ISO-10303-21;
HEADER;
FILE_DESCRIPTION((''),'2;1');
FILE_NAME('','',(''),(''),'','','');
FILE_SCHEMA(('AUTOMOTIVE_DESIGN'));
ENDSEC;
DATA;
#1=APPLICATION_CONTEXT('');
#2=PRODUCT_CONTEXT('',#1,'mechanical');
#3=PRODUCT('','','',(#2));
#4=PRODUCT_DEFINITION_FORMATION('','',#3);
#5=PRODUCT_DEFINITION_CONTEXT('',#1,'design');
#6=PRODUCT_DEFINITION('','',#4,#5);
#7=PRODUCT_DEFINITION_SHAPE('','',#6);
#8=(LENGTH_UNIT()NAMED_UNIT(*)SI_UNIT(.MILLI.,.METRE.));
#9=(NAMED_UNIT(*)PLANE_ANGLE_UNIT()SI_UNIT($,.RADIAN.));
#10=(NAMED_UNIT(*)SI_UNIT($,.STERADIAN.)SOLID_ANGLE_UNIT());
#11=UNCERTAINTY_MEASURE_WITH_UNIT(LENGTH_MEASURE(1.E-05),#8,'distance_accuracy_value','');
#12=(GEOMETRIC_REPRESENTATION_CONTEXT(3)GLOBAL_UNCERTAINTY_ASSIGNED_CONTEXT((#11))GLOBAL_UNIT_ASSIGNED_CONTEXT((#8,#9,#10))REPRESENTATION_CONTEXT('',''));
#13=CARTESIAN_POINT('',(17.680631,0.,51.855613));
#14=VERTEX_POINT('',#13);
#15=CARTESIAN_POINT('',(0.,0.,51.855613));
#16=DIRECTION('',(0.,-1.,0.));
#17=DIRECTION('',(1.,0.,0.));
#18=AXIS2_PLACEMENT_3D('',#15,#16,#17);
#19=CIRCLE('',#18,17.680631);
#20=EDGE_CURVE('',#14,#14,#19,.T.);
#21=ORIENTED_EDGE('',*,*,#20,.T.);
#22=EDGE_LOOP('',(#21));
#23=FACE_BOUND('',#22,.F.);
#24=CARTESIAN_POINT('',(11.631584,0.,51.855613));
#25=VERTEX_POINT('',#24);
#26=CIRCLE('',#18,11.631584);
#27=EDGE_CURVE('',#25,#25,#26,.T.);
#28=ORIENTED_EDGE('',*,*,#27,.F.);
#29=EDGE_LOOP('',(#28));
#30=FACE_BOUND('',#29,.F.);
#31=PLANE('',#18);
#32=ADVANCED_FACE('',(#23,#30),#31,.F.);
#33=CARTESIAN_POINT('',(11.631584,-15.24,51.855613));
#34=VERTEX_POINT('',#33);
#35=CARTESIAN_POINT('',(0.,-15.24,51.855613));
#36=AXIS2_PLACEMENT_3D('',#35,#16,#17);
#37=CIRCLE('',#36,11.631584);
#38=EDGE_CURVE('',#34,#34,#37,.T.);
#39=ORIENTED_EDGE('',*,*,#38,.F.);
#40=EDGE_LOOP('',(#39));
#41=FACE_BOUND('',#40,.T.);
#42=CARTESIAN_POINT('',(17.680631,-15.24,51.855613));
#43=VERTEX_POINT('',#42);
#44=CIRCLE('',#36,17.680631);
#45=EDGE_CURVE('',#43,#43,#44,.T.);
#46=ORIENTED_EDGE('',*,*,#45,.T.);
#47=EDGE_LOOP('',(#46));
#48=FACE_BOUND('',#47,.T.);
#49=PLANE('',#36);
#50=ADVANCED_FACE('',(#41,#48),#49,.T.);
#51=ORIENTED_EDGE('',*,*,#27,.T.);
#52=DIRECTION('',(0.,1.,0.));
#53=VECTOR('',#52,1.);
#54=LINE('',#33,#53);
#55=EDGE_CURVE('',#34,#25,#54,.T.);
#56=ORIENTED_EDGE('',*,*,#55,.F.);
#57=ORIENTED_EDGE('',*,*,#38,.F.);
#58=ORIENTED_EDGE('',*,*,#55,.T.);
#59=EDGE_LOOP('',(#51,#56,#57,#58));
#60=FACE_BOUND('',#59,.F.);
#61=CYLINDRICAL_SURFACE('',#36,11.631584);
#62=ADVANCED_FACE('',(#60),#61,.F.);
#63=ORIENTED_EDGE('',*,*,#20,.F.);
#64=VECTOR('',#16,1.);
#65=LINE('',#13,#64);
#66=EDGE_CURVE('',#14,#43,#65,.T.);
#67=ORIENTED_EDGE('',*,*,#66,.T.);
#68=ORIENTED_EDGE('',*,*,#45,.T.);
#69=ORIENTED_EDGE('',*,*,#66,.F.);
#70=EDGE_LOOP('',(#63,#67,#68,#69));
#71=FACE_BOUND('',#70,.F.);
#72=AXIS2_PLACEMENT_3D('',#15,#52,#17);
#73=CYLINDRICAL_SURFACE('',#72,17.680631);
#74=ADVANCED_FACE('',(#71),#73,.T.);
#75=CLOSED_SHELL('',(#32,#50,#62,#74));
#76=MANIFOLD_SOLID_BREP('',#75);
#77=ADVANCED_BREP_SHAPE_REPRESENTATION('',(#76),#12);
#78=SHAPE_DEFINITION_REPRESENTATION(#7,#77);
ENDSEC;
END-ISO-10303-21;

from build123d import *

# Parameters (mm, degrees)
F0_R     = 17.6806314322
F1_DEPTH = 15.24
F3_R     = 11.6315842242
F4_DEPTH = 15.24


# Not quite as in the source:
# - the program builds the solid bodies; features that only make, move or delete a surface that nothing else refers to are left out


with BuildPart() as f1:
    # F0 (on Front) → F1 (new body)
    with BuildSketch(Plane.XZ):
        with Locations((0, 51.8556125462)):
            Circle(F0_R)
    extrude(amount=F1_DEPTH)

    # F3 (on face) → F4 (cut)
    with BuildSketch(Plane.XZ.offset(15.24)):
        with Locations((0, 51.8556125462)):
            Circle(F3_R)
    extrude(amount=-F4_DEPTH, mode=Mode.SUBTRACT)


solid = f1.part
